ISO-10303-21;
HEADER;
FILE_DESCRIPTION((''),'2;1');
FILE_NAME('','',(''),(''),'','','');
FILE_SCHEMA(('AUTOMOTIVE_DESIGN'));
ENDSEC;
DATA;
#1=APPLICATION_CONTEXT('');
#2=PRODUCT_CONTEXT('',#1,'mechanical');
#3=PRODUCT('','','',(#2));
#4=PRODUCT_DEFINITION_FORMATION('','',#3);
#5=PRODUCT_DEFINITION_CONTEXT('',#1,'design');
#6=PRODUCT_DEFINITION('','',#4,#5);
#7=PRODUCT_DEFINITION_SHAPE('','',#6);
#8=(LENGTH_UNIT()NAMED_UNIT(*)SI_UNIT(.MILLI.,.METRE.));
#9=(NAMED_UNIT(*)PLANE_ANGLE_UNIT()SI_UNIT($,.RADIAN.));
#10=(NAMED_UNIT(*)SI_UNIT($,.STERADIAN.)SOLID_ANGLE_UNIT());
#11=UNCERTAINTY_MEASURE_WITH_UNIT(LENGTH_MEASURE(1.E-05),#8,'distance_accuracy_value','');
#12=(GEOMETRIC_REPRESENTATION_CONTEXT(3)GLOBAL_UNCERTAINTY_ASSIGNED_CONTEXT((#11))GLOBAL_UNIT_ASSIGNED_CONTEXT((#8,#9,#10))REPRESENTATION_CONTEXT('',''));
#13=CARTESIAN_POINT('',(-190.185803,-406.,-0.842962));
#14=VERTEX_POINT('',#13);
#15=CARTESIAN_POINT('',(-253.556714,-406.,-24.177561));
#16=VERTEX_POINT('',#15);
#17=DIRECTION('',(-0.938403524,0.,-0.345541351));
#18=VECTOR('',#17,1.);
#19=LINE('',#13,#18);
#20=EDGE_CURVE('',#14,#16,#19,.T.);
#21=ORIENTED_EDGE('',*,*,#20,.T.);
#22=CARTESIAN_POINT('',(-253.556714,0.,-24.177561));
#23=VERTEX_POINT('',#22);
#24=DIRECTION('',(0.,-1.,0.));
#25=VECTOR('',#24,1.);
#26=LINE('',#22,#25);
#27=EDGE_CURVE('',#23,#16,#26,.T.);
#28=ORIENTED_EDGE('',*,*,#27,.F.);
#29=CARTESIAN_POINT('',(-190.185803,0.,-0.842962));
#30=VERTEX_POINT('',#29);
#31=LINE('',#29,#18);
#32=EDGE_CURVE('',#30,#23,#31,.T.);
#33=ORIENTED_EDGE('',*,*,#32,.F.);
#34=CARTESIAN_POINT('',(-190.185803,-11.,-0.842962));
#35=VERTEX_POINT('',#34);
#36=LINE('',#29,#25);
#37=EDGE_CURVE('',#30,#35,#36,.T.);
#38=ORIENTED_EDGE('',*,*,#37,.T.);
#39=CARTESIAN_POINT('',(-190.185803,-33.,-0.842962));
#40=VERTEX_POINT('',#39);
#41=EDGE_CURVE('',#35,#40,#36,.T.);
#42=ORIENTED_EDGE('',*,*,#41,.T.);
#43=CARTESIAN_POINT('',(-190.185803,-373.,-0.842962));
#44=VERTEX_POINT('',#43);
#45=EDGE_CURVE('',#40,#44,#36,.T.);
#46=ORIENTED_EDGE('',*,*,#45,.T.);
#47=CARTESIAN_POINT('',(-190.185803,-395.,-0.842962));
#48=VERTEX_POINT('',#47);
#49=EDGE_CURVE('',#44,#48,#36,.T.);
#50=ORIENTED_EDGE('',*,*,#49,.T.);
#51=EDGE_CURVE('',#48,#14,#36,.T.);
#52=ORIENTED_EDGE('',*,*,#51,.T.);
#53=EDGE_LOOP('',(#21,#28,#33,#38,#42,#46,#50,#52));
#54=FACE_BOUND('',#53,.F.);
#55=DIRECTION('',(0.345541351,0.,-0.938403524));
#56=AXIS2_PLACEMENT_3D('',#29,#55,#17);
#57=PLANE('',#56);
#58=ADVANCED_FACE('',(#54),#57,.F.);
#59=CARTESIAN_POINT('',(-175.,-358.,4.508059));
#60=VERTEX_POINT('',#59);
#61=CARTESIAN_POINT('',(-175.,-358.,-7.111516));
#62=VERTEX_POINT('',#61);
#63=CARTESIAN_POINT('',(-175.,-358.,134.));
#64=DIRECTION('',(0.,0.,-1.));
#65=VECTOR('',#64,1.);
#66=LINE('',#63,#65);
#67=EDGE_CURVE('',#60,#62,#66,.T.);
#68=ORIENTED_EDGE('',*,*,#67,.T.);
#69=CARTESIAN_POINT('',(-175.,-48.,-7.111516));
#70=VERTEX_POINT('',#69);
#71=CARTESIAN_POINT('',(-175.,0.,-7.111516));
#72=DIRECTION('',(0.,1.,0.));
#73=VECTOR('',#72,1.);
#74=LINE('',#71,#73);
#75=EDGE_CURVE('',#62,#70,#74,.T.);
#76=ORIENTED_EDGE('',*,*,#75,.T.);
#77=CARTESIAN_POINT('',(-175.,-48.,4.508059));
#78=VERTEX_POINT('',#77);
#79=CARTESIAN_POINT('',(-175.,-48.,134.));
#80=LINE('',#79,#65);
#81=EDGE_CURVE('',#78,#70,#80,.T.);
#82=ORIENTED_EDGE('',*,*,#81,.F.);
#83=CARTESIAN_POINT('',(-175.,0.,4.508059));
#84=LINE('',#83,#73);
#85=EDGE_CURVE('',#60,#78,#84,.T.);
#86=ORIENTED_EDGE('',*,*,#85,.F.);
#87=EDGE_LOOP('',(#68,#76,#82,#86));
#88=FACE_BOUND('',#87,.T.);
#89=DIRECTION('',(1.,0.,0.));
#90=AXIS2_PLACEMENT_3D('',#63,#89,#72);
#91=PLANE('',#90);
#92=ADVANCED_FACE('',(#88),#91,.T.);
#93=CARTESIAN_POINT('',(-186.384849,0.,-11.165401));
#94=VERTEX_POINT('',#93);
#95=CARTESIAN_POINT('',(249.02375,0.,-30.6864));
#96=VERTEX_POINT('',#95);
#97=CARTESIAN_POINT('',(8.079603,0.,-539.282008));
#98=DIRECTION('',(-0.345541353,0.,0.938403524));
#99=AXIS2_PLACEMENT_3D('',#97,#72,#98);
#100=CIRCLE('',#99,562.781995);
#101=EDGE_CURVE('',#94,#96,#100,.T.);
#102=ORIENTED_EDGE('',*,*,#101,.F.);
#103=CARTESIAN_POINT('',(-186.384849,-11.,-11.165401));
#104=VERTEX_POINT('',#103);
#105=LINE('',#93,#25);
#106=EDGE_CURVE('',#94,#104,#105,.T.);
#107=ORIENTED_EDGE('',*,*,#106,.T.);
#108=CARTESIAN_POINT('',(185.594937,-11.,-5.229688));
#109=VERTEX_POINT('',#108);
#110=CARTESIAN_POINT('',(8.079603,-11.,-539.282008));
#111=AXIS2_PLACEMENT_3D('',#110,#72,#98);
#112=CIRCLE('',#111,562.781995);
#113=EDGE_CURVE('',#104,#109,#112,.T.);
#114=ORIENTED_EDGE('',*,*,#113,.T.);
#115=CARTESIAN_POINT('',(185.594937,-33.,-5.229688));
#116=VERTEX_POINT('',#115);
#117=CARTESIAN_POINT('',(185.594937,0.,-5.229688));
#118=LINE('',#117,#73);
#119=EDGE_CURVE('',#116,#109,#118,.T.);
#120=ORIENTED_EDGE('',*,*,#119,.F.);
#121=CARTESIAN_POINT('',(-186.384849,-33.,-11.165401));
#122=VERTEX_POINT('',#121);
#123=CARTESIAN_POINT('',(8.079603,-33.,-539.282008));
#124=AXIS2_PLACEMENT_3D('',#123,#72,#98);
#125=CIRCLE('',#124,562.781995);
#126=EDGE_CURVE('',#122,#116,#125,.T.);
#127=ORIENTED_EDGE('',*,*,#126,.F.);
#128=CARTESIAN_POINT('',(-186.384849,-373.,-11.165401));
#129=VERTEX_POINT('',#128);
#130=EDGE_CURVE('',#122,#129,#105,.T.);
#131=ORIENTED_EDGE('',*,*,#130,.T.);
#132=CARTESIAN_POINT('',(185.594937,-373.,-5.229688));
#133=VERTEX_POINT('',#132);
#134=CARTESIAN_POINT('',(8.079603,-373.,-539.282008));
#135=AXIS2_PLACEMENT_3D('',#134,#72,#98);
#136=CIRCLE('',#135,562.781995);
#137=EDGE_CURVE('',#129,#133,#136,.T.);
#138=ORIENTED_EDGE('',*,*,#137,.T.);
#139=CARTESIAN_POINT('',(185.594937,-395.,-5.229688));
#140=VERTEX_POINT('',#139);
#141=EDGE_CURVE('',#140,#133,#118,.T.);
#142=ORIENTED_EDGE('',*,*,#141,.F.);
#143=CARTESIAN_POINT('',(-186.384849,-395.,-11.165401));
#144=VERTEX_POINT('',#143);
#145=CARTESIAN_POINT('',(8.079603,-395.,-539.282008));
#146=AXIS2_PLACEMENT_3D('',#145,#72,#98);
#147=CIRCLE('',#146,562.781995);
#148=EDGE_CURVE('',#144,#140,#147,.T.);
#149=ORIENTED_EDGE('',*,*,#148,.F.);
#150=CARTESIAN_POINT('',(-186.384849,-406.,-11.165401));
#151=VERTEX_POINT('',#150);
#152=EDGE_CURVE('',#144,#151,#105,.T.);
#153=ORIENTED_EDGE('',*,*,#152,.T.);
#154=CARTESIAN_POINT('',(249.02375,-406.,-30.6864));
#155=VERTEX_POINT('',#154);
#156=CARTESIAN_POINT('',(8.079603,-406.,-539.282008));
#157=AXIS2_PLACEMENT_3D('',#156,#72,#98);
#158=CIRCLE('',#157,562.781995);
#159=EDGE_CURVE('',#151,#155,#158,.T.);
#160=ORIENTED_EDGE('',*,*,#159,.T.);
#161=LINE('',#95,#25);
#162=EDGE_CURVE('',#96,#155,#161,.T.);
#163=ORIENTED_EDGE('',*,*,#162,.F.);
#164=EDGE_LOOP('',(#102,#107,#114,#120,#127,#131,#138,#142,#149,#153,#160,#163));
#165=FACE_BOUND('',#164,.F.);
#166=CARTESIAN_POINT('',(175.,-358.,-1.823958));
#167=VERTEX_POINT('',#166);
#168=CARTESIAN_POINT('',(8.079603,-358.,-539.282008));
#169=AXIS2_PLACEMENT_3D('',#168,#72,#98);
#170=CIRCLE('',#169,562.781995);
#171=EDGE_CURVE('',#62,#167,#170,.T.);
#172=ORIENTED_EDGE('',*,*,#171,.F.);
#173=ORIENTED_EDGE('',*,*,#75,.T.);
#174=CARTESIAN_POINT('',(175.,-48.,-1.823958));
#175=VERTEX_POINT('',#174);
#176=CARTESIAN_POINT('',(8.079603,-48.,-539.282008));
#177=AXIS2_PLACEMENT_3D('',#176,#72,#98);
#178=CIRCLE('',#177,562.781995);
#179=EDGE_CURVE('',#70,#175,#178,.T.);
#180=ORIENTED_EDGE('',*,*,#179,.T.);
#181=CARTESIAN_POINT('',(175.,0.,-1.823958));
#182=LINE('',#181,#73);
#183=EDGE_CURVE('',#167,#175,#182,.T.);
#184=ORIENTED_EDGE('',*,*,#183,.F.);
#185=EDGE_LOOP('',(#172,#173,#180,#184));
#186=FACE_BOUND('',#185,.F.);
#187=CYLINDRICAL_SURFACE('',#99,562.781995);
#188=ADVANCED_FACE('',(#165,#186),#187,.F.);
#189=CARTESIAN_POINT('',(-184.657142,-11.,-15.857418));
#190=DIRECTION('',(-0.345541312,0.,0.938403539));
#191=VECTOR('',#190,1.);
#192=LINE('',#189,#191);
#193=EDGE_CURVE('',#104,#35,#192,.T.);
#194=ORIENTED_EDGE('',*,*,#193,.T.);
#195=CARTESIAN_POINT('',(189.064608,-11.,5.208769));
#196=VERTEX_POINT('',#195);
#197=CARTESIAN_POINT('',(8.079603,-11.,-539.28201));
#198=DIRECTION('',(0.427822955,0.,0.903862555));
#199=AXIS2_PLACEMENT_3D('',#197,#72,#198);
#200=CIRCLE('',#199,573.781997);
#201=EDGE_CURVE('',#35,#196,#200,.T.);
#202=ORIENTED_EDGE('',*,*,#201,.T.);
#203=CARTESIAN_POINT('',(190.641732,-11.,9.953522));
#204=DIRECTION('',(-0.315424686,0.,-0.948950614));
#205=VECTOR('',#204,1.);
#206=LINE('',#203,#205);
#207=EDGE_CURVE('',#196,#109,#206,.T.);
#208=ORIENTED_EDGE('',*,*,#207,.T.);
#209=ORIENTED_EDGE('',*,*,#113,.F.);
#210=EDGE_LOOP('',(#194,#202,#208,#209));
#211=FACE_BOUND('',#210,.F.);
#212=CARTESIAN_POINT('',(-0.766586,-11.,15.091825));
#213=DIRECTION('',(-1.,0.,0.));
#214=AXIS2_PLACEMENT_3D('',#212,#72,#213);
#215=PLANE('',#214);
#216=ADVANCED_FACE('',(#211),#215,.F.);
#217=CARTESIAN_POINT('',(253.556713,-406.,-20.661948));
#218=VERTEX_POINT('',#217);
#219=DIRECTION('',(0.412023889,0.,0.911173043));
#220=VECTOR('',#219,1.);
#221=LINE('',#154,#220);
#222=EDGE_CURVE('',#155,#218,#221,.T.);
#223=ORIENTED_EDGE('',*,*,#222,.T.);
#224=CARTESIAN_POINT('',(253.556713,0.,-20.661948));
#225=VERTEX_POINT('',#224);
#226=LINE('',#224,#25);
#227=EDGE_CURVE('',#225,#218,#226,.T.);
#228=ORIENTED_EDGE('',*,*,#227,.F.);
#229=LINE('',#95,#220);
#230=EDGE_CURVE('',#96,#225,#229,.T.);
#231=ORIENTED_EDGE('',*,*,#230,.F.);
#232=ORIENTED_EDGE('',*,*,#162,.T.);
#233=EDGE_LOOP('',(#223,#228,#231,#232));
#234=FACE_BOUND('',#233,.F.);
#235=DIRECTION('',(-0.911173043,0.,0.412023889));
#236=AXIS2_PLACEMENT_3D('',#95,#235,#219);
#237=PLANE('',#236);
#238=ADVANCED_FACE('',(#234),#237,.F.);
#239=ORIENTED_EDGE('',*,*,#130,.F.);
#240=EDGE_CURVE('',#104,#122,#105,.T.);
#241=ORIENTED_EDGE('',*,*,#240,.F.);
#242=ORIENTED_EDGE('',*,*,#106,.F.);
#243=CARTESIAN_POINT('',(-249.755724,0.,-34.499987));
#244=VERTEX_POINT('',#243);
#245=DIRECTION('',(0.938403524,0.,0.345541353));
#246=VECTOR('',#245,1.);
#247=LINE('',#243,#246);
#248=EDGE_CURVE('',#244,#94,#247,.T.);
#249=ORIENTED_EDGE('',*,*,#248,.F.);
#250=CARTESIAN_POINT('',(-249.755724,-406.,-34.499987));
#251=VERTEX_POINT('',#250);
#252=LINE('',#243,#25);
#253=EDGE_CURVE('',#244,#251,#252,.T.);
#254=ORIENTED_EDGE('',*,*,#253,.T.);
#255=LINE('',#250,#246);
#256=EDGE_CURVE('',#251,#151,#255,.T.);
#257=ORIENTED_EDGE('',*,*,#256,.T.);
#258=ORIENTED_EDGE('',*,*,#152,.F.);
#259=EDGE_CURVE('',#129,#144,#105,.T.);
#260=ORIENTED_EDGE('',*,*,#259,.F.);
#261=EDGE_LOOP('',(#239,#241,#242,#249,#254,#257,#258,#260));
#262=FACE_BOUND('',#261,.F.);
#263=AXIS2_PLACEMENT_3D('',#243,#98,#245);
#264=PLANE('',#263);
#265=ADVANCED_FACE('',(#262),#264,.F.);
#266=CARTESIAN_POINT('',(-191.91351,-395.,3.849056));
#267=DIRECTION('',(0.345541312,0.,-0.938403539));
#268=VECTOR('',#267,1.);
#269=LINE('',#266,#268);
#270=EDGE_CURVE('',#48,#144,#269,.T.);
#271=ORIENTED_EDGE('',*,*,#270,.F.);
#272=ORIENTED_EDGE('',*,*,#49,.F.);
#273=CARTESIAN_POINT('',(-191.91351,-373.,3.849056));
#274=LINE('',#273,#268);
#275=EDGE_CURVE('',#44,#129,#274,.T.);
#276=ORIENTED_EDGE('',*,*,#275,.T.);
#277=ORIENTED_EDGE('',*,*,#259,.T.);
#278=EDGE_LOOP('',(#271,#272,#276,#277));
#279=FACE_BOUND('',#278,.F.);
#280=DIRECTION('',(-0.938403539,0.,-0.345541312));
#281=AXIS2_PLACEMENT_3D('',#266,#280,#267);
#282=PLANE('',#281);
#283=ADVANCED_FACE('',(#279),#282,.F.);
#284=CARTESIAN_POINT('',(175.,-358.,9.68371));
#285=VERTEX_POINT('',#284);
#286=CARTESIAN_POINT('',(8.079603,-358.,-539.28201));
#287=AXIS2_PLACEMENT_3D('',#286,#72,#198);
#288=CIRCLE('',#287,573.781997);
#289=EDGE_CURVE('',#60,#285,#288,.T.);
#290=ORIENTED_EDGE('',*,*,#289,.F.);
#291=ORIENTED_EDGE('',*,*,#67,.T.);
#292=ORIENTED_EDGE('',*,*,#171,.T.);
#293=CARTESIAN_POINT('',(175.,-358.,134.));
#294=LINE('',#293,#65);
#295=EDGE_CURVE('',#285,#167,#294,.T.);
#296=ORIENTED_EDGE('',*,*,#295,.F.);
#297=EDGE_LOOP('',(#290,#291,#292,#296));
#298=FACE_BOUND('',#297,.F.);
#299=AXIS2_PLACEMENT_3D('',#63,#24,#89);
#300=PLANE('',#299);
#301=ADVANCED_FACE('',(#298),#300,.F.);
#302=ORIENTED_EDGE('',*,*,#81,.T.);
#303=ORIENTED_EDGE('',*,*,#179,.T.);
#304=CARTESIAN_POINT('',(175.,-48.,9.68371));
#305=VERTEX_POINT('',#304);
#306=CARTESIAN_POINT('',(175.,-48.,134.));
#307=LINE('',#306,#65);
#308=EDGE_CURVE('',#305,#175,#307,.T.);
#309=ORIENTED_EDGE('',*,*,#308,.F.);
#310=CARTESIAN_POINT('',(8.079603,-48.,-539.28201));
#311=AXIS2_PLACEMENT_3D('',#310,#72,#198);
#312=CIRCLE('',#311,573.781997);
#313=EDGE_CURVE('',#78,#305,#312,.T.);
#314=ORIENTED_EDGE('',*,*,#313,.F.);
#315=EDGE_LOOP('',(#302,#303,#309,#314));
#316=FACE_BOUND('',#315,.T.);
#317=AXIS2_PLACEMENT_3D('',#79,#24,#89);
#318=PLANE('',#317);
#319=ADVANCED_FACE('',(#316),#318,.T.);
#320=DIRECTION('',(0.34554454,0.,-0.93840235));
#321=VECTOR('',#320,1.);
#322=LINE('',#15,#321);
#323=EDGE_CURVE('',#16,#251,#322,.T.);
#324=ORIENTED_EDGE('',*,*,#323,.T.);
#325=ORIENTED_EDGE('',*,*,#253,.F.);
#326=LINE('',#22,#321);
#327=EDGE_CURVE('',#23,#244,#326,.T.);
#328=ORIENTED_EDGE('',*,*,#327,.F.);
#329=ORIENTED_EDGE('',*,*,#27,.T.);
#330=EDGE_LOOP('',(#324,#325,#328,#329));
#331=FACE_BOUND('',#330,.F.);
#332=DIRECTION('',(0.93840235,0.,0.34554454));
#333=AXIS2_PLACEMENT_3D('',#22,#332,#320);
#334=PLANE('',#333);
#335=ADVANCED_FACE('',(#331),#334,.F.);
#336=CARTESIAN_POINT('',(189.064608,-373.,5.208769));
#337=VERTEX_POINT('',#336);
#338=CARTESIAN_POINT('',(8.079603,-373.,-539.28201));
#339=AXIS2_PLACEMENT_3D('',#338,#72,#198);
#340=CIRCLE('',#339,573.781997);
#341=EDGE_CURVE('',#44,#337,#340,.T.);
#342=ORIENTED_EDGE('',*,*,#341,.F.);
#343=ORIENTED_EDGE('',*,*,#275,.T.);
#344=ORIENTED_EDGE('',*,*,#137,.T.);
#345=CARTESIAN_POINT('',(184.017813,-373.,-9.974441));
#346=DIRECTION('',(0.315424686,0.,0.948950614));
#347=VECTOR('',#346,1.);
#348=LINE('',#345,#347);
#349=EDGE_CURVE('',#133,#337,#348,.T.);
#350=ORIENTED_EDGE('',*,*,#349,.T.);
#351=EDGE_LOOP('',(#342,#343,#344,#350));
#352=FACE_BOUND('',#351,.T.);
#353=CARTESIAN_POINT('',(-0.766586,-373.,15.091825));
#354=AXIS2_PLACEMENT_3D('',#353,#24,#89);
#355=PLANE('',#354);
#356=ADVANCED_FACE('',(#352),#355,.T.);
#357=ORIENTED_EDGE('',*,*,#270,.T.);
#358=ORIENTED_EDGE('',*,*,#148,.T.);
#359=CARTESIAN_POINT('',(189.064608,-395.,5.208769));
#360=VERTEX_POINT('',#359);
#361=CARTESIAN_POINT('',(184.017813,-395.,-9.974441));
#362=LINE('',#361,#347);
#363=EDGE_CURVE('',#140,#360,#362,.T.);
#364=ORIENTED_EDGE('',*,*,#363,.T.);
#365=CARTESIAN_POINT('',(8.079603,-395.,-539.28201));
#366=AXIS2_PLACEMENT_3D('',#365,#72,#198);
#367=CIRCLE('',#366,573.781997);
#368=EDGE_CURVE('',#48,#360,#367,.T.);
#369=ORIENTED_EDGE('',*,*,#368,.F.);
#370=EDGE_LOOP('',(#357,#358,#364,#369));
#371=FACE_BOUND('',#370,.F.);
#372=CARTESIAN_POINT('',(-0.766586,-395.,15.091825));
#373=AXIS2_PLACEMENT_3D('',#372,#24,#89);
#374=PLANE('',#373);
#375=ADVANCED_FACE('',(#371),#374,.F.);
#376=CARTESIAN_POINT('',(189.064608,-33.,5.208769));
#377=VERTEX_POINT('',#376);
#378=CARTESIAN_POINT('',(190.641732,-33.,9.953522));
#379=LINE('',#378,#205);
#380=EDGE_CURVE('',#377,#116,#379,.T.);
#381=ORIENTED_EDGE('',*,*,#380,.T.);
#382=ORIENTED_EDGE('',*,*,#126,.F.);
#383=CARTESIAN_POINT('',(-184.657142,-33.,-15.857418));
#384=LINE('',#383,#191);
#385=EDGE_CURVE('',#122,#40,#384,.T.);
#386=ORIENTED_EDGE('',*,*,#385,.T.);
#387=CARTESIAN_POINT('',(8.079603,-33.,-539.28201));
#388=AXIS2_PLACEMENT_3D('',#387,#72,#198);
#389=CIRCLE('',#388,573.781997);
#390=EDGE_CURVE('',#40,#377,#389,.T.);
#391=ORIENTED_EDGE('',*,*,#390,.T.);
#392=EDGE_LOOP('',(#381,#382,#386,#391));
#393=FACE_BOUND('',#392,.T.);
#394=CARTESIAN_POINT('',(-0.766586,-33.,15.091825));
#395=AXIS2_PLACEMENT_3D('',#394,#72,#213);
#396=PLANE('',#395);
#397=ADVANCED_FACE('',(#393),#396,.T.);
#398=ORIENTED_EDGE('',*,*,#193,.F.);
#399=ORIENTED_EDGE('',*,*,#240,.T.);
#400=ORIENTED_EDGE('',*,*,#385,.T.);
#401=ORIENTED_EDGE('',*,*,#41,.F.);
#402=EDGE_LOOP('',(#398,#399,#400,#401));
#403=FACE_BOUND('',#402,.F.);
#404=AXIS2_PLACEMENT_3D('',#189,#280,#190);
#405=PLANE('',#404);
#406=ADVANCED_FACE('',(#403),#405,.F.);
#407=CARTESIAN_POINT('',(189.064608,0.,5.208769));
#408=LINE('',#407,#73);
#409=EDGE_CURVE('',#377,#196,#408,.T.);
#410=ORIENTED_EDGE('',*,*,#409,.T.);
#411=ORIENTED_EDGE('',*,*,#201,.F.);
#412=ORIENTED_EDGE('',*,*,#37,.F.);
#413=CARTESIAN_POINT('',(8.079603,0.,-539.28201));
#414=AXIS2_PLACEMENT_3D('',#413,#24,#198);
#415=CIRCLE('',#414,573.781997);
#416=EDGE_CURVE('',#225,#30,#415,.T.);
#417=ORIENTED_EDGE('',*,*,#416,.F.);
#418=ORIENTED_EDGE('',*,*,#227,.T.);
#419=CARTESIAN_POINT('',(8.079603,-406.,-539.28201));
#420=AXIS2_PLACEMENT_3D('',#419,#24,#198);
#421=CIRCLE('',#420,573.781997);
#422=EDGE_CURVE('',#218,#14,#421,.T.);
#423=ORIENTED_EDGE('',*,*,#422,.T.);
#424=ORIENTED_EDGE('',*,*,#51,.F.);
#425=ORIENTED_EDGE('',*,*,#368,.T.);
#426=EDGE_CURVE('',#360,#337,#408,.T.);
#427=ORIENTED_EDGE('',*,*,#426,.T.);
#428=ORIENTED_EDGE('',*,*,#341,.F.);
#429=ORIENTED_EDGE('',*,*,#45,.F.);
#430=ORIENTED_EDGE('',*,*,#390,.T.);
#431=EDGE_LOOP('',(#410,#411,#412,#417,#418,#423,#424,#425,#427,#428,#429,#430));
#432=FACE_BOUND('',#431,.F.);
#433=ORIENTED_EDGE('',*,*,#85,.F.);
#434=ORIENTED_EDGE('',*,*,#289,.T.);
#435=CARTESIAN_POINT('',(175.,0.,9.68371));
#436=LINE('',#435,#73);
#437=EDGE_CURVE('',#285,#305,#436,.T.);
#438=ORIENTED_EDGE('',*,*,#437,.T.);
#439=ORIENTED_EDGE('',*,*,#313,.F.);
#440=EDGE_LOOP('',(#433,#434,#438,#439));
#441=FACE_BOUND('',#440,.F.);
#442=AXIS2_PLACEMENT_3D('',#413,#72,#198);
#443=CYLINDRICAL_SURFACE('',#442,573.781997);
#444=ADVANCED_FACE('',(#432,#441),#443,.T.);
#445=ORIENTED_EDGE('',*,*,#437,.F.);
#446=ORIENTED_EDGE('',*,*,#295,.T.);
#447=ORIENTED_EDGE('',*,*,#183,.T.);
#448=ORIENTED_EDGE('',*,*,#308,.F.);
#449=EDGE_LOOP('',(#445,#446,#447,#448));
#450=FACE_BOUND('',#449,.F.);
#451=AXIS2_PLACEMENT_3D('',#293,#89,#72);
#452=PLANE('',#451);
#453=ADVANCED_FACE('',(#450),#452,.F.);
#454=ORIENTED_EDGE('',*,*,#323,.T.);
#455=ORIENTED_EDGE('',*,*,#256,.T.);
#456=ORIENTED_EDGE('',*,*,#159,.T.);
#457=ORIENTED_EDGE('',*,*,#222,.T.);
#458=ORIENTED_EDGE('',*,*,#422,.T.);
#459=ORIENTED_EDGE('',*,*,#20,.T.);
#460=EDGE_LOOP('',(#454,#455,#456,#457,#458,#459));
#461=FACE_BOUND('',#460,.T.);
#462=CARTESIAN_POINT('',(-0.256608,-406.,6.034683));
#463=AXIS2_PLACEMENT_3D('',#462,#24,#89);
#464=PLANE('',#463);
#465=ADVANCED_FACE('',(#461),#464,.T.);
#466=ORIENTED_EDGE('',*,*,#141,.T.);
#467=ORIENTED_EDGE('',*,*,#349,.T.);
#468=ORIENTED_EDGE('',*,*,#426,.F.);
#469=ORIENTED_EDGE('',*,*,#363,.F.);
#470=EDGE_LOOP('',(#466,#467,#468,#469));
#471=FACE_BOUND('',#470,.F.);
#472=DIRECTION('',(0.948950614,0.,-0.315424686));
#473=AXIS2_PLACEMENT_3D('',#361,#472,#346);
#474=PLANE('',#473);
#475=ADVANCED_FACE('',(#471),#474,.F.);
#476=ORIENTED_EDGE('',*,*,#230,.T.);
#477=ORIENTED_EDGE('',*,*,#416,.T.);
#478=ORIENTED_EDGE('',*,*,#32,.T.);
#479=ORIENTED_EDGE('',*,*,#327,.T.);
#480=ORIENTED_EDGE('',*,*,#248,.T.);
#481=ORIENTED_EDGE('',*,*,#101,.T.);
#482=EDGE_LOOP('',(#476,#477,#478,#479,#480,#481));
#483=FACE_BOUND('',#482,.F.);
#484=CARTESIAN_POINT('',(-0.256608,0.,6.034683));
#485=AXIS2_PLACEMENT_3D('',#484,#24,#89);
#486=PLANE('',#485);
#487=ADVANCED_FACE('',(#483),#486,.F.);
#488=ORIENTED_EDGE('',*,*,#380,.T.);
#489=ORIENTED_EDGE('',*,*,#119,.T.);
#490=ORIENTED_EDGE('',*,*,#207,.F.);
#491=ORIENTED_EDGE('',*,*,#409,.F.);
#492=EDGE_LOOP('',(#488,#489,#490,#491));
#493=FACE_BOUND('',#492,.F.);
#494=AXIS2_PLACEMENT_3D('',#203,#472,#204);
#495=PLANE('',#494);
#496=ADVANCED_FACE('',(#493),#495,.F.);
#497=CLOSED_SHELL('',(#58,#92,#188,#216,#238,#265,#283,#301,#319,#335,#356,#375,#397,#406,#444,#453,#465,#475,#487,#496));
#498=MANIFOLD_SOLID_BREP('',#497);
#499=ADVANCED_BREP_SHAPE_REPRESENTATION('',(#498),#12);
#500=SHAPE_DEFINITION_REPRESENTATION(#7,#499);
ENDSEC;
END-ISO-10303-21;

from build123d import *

# Parameters (mm, degrees)
F1_DEPTH  = 406
F4_DEPTH  = 22
F7_DEPTH  = 22
F9_W      = 350
F9_H      = 310
F10_DEPTH = 200


# Not quite as in the source:
# - ends of sketch curves that miss each other by under 0.0002 mm in the source are joined


with BuildPart() as f1:
    # F0 (on Front) → F1 (new body)
    with BuildSketch(Plane.XZ):
        with BuildLine():
            ThreePointArc((-186.3848490661, -11.1654008205), (33.2859089962, 22.935224068), (249.0237497892, -30.686400445))
            Line((249.0237497892, -30.686400445), (253.556713, -20.661948))
            ThreePointArc((253.556713, -20.661948), (33.6810541326, 33.9285497238), (-190.1858030941, -0.8429617445))
            Line((-190.1858030941, -0.8429617445), (-253.556714, -24.177561))
            Line((-253.556714, -24.177561), (-249.755724, -34.499987))
            Line((-249.755724, -34.499987), (-186.3848490661, -11.1654008205))
        make_face()
    extrude(amount=F1_DEPTH)

    # F3 (on offset) → F4 (cut)
    with BuildSketch(Plane.XZ.offset(395)):
        with BuildLine():
            Line((184.0178133859, -9.9744413883), (190.6417317828, 9.9535215049))
            ThreePointArc((190.6417317828, 9.9535215049), (-1.1548935515, 39.4263138769), (-191.9135098522, 3.8490558767))
            Line((-191.9135098522, 3.8490558767), (-184.6571423005, -15.8574184389))
            ThreePointArc((-184.6571423005, -15.8574184389), (-0.819837913, 18.4289869585), (184.0178133859, -9.9744413883))
        make_face()
    extrude(amount=-F4_DEPTH, mode=Mode.SUBTRACT)

    # F6 (on offset) → F7 (cut)
    with BuildSketch(Plane(origin=(0, -11, 0), x_dir=(-1, 0, 0), z_dir=(0, 1, 0))):
        with BuildLine():
            ThreePointArc((191.9135098522, 3.8490558767), (1.1548935515, 39.4263138769), (-190.6417317828, 9.9535215049))
            Line((-190.6417317828, 9.9535215049), (-184.0178133859, -9.9744413883))
            ThreePointArc((-184.0178133859, -9.9744413883), (0.819837913, 18.4289869585), (184.6571423005, -15.8574184389))
            Line((184.6571423005, -15.8574184389), (191.9135098522, 3.8490558767))
        make_face()
    extrude(amount=-F7_DEPTH, mode=Mode.SUBTRACT)

    # F9 (on offset) → F10 (cut)
    with BuildSketch(Plane.XY.offset(134)):
        with Locations((-5e-07, -203)):
            Rectangle(F9_W, F9_H)
    extrude(amount=-F10_DEPTH, mode=Mode.SUBTRACT)


solid = f1.part
